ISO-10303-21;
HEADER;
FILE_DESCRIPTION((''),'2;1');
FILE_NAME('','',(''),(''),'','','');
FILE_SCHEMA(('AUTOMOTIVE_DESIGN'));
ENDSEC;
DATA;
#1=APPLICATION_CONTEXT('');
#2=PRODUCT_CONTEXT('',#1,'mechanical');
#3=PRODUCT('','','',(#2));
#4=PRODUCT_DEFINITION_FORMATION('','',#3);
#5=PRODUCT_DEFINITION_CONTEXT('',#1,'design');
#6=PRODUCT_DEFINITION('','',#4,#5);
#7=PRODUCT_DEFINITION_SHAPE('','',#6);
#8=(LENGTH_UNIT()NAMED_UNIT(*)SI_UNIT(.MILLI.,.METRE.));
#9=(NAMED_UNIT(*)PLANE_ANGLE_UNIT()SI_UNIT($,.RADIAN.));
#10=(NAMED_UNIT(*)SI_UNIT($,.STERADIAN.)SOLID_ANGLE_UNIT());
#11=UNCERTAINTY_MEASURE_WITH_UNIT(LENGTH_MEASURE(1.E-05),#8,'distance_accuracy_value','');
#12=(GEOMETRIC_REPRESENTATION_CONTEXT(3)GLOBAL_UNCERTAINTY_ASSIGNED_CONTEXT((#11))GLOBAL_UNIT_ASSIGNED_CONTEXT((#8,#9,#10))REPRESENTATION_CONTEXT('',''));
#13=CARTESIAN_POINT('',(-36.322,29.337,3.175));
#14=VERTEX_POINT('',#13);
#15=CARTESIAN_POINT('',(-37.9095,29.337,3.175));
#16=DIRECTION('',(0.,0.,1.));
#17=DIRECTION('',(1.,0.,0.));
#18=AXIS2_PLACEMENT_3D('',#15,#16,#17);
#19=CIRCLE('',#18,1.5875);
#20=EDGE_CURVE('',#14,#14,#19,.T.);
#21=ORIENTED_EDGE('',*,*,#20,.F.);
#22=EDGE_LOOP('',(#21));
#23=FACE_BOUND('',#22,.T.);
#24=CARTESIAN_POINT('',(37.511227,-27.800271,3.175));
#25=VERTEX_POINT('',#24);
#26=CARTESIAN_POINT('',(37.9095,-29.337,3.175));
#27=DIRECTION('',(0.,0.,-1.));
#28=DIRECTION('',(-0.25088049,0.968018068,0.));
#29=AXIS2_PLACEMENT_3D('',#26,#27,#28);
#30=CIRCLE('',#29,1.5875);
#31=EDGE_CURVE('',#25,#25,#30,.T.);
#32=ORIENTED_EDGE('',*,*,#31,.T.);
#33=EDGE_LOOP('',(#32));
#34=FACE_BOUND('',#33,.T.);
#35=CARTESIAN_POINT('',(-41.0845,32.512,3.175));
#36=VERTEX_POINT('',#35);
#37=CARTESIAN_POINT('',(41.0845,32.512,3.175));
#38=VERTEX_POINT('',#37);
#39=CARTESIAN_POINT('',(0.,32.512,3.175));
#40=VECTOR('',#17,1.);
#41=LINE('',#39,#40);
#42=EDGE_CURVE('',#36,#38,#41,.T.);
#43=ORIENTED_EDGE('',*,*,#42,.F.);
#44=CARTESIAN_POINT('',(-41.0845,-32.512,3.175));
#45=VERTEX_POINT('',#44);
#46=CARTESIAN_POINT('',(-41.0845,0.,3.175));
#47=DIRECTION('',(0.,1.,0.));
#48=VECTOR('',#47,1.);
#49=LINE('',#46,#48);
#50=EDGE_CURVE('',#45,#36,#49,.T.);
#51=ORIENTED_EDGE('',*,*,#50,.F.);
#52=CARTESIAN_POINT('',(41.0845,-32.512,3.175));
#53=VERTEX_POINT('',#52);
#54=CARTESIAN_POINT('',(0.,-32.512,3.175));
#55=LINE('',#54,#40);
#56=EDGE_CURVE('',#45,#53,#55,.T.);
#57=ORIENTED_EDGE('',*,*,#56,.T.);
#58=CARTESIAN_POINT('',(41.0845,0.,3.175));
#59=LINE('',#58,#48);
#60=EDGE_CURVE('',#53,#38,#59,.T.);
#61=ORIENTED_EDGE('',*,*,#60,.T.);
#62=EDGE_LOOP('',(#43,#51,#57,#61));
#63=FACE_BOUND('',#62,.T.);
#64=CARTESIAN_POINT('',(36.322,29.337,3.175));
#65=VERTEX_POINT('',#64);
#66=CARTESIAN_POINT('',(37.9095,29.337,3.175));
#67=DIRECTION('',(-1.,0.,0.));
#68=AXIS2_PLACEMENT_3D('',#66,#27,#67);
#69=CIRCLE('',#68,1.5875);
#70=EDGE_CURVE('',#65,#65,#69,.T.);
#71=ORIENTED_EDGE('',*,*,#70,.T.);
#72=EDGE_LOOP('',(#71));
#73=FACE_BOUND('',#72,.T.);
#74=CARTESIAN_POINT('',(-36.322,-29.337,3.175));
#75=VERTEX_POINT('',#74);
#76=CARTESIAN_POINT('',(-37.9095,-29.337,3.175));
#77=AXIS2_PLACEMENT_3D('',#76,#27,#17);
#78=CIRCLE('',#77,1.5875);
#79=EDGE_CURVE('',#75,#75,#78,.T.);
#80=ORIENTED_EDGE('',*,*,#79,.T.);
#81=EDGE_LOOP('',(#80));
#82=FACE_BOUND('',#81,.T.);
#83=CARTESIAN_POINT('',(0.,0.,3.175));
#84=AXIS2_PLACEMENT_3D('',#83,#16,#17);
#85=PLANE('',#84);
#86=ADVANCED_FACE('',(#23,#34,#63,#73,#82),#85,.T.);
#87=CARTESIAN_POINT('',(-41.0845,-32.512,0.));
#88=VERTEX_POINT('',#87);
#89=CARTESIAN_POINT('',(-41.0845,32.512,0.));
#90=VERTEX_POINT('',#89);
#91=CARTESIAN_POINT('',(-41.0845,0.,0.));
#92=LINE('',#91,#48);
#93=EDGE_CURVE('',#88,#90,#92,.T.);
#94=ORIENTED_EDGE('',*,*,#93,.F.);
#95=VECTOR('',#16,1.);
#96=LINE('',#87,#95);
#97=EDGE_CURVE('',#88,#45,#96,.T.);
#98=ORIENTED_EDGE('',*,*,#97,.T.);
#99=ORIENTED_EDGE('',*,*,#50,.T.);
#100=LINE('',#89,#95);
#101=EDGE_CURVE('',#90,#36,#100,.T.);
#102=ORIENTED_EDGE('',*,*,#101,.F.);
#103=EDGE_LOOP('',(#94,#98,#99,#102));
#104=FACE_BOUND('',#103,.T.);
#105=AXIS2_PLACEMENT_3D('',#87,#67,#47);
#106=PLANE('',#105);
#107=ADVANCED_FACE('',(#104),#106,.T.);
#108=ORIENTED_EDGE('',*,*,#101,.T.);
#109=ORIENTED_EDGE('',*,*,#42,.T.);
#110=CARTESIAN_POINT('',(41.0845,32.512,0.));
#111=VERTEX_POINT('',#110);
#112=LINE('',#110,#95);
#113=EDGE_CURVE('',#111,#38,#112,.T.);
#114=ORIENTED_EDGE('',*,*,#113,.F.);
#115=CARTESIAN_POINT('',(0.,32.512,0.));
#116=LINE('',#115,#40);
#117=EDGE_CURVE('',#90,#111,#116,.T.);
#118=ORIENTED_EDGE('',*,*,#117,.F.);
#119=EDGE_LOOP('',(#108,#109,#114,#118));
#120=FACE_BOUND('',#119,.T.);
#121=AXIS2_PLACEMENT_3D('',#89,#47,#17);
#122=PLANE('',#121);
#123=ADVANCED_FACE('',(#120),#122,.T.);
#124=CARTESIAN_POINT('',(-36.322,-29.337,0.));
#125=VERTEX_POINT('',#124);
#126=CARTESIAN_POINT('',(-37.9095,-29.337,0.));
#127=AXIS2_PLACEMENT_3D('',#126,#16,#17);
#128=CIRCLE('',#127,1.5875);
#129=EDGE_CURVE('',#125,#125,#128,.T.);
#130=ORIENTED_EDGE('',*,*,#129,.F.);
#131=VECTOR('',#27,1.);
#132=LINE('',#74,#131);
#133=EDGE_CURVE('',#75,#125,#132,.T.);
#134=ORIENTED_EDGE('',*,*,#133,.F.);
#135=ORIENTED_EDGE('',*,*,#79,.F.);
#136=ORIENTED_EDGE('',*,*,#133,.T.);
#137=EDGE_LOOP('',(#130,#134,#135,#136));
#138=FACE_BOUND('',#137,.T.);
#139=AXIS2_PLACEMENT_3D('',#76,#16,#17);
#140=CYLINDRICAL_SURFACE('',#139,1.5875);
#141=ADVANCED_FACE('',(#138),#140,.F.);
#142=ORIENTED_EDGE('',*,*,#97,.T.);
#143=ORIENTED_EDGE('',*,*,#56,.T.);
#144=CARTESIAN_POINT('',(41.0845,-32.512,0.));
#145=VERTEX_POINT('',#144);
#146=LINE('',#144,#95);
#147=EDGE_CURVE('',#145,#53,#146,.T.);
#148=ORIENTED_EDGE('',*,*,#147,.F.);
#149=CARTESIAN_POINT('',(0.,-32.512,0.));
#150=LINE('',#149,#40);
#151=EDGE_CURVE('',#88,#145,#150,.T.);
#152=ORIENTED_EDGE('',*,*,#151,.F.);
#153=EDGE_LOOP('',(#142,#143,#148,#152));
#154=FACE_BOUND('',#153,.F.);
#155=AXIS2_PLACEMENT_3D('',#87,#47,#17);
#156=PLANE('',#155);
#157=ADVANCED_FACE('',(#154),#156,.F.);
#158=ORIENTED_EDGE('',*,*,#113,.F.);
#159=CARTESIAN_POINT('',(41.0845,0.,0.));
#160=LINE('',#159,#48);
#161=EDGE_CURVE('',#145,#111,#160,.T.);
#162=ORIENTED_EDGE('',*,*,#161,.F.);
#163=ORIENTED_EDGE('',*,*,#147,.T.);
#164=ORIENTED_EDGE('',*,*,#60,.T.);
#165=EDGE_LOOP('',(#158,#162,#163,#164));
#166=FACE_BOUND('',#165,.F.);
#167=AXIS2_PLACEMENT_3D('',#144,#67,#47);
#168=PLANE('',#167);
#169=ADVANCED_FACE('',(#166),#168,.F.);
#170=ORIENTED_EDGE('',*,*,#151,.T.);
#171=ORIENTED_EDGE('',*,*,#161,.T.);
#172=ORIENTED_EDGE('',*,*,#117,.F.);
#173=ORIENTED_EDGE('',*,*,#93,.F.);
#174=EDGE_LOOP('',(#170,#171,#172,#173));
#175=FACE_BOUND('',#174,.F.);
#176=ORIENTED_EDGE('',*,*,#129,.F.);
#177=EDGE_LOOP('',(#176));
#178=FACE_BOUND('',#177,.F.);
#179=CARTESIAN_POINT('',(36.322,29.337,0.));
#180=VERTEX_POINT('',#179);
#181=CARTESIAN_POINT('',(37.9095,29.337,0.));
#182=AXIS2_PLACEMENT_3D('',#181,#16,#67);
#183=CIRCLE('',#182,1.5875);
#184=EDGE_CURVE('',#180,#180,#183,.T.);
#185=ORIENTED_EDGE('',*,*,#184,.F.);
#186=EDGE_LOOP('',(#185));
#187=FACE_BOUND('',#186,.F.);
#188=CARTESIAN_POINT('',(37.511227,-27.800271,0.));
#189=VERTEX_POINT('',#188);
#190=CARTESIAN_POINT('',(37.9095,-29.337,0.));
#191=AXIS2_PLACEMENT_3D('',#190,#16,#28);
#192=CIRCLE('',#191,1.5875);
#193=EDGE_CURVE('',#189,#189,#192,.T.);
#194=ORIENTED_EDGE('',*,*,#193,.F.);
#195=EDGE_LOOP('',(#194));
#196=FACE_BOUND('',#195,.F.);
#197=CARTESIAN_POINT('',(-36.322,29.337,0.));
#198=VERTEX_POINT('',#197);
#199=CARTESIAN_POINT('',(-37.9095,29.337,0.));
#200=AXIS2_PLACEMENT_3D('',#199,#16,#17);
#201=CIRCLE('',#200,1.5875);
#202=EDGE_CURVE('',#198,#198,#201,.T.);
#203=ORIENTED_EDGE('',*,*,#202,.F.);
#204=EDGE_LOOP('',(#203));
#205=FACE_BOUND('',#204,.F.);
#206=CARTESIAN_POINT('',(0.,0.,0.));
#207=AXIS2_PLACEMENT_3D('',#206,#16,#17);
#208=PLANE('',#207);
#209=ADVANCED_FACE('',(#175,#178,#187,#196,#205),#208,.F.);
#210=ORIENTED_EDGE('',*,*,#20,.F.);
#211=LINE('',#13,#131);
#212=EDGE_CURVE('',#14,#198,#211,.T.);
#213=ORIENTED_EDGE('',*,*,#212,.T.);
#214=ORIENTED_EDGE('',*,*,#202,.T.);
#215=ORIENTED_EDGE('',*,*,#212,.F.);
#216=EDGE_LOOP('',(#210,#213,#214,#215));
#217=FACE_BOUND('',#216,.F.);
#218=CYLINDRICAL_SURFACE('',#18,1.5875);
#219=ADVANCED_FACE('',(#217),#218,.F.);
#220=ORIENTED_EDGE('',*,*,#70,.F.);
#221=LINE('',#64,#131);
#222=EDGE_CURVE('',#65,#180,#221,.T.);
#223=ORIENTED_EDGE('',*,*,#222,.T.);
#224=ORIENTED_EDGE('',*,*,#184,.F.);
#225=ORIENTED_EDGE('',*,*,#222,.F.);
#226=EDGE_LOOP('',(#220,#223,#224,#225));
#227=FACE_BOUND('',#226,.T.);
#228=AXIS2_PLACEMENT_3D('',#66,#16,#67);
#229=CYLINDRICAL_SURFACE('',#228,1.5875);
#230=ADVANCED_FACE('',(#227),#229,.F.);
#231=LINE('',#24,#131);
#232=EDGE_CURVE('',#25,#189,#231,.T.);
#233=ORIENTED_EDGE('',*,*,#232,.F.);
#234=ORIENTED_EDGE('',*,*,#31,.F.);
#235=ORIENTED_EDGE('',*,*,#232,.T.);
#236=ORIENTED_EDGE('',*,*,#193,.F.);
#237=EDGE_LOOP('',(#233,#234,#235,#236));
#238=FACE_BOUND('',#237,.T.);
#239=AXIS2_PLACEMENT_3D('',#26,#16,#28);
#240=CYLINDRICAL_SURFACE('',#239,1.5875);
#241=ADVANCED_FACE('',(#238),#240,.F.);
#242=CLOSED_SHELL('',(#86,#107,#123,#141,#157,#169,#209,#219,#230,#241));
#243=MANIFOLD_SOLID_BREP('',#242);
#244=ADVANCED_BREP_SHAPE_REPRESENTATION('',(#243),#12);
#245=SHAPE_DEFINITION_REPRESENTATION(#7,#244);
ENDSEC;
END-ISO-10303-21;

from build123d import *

# Parameters (mm, degrees)
F0_W     = 82.169
F0_H     = 65.024
F1_DEPTH = 3.175
F2_R     = 1.5875
F3_DEPTH = 25.4


# Not quite as in the source:
# - a pattern or mirror of a feature is missing from the dataset's text; its kind, count and spacing are read off the source's solid


with BuildPart() as f1:
    # F0 (on Top) → F1 (new body)
    with BuildSketch(Plane.XY):
        Rectangle(F0_W, F0_H)
    extrude(amount=F1_DEPTH)

    # F2 (on face) → F3 (cut)
    with BuildSketch(Plane.XY.offset(3.175)):
        with Locations((-37.9095, 29.337)):
            Circle(F2_R)
    f3 = extrude(amount=-F3_DEPTH, mode=Mode.SUBTRACT)

    # F3_copies: F3 across plane
    add(f3.mirror(Plane(origin=(0, 0, 0), x_dir=(0, 0, 1), z_dir=(1, 0, 0))), mode=Mode.SUBTRACT)

    # F3_copies1: F3 across plane
    add(f3.mirror(Plane(origin=(0, 0, 0), x_dir=(0, 0, -1), z_dir=(0, -1, 0))), mode=Mode.SUBTRACT)

    # F3_copies2: F3 across plane
    add(f3.mirror(Plane(origin=(0, 0, 0), x_dir=(0.6120128715, 0.7908478015, 0), z_dir=(0.7908478015, -0.6120128715, 0))), mode=Mode.SUBTRACT)


solid = f1.part
